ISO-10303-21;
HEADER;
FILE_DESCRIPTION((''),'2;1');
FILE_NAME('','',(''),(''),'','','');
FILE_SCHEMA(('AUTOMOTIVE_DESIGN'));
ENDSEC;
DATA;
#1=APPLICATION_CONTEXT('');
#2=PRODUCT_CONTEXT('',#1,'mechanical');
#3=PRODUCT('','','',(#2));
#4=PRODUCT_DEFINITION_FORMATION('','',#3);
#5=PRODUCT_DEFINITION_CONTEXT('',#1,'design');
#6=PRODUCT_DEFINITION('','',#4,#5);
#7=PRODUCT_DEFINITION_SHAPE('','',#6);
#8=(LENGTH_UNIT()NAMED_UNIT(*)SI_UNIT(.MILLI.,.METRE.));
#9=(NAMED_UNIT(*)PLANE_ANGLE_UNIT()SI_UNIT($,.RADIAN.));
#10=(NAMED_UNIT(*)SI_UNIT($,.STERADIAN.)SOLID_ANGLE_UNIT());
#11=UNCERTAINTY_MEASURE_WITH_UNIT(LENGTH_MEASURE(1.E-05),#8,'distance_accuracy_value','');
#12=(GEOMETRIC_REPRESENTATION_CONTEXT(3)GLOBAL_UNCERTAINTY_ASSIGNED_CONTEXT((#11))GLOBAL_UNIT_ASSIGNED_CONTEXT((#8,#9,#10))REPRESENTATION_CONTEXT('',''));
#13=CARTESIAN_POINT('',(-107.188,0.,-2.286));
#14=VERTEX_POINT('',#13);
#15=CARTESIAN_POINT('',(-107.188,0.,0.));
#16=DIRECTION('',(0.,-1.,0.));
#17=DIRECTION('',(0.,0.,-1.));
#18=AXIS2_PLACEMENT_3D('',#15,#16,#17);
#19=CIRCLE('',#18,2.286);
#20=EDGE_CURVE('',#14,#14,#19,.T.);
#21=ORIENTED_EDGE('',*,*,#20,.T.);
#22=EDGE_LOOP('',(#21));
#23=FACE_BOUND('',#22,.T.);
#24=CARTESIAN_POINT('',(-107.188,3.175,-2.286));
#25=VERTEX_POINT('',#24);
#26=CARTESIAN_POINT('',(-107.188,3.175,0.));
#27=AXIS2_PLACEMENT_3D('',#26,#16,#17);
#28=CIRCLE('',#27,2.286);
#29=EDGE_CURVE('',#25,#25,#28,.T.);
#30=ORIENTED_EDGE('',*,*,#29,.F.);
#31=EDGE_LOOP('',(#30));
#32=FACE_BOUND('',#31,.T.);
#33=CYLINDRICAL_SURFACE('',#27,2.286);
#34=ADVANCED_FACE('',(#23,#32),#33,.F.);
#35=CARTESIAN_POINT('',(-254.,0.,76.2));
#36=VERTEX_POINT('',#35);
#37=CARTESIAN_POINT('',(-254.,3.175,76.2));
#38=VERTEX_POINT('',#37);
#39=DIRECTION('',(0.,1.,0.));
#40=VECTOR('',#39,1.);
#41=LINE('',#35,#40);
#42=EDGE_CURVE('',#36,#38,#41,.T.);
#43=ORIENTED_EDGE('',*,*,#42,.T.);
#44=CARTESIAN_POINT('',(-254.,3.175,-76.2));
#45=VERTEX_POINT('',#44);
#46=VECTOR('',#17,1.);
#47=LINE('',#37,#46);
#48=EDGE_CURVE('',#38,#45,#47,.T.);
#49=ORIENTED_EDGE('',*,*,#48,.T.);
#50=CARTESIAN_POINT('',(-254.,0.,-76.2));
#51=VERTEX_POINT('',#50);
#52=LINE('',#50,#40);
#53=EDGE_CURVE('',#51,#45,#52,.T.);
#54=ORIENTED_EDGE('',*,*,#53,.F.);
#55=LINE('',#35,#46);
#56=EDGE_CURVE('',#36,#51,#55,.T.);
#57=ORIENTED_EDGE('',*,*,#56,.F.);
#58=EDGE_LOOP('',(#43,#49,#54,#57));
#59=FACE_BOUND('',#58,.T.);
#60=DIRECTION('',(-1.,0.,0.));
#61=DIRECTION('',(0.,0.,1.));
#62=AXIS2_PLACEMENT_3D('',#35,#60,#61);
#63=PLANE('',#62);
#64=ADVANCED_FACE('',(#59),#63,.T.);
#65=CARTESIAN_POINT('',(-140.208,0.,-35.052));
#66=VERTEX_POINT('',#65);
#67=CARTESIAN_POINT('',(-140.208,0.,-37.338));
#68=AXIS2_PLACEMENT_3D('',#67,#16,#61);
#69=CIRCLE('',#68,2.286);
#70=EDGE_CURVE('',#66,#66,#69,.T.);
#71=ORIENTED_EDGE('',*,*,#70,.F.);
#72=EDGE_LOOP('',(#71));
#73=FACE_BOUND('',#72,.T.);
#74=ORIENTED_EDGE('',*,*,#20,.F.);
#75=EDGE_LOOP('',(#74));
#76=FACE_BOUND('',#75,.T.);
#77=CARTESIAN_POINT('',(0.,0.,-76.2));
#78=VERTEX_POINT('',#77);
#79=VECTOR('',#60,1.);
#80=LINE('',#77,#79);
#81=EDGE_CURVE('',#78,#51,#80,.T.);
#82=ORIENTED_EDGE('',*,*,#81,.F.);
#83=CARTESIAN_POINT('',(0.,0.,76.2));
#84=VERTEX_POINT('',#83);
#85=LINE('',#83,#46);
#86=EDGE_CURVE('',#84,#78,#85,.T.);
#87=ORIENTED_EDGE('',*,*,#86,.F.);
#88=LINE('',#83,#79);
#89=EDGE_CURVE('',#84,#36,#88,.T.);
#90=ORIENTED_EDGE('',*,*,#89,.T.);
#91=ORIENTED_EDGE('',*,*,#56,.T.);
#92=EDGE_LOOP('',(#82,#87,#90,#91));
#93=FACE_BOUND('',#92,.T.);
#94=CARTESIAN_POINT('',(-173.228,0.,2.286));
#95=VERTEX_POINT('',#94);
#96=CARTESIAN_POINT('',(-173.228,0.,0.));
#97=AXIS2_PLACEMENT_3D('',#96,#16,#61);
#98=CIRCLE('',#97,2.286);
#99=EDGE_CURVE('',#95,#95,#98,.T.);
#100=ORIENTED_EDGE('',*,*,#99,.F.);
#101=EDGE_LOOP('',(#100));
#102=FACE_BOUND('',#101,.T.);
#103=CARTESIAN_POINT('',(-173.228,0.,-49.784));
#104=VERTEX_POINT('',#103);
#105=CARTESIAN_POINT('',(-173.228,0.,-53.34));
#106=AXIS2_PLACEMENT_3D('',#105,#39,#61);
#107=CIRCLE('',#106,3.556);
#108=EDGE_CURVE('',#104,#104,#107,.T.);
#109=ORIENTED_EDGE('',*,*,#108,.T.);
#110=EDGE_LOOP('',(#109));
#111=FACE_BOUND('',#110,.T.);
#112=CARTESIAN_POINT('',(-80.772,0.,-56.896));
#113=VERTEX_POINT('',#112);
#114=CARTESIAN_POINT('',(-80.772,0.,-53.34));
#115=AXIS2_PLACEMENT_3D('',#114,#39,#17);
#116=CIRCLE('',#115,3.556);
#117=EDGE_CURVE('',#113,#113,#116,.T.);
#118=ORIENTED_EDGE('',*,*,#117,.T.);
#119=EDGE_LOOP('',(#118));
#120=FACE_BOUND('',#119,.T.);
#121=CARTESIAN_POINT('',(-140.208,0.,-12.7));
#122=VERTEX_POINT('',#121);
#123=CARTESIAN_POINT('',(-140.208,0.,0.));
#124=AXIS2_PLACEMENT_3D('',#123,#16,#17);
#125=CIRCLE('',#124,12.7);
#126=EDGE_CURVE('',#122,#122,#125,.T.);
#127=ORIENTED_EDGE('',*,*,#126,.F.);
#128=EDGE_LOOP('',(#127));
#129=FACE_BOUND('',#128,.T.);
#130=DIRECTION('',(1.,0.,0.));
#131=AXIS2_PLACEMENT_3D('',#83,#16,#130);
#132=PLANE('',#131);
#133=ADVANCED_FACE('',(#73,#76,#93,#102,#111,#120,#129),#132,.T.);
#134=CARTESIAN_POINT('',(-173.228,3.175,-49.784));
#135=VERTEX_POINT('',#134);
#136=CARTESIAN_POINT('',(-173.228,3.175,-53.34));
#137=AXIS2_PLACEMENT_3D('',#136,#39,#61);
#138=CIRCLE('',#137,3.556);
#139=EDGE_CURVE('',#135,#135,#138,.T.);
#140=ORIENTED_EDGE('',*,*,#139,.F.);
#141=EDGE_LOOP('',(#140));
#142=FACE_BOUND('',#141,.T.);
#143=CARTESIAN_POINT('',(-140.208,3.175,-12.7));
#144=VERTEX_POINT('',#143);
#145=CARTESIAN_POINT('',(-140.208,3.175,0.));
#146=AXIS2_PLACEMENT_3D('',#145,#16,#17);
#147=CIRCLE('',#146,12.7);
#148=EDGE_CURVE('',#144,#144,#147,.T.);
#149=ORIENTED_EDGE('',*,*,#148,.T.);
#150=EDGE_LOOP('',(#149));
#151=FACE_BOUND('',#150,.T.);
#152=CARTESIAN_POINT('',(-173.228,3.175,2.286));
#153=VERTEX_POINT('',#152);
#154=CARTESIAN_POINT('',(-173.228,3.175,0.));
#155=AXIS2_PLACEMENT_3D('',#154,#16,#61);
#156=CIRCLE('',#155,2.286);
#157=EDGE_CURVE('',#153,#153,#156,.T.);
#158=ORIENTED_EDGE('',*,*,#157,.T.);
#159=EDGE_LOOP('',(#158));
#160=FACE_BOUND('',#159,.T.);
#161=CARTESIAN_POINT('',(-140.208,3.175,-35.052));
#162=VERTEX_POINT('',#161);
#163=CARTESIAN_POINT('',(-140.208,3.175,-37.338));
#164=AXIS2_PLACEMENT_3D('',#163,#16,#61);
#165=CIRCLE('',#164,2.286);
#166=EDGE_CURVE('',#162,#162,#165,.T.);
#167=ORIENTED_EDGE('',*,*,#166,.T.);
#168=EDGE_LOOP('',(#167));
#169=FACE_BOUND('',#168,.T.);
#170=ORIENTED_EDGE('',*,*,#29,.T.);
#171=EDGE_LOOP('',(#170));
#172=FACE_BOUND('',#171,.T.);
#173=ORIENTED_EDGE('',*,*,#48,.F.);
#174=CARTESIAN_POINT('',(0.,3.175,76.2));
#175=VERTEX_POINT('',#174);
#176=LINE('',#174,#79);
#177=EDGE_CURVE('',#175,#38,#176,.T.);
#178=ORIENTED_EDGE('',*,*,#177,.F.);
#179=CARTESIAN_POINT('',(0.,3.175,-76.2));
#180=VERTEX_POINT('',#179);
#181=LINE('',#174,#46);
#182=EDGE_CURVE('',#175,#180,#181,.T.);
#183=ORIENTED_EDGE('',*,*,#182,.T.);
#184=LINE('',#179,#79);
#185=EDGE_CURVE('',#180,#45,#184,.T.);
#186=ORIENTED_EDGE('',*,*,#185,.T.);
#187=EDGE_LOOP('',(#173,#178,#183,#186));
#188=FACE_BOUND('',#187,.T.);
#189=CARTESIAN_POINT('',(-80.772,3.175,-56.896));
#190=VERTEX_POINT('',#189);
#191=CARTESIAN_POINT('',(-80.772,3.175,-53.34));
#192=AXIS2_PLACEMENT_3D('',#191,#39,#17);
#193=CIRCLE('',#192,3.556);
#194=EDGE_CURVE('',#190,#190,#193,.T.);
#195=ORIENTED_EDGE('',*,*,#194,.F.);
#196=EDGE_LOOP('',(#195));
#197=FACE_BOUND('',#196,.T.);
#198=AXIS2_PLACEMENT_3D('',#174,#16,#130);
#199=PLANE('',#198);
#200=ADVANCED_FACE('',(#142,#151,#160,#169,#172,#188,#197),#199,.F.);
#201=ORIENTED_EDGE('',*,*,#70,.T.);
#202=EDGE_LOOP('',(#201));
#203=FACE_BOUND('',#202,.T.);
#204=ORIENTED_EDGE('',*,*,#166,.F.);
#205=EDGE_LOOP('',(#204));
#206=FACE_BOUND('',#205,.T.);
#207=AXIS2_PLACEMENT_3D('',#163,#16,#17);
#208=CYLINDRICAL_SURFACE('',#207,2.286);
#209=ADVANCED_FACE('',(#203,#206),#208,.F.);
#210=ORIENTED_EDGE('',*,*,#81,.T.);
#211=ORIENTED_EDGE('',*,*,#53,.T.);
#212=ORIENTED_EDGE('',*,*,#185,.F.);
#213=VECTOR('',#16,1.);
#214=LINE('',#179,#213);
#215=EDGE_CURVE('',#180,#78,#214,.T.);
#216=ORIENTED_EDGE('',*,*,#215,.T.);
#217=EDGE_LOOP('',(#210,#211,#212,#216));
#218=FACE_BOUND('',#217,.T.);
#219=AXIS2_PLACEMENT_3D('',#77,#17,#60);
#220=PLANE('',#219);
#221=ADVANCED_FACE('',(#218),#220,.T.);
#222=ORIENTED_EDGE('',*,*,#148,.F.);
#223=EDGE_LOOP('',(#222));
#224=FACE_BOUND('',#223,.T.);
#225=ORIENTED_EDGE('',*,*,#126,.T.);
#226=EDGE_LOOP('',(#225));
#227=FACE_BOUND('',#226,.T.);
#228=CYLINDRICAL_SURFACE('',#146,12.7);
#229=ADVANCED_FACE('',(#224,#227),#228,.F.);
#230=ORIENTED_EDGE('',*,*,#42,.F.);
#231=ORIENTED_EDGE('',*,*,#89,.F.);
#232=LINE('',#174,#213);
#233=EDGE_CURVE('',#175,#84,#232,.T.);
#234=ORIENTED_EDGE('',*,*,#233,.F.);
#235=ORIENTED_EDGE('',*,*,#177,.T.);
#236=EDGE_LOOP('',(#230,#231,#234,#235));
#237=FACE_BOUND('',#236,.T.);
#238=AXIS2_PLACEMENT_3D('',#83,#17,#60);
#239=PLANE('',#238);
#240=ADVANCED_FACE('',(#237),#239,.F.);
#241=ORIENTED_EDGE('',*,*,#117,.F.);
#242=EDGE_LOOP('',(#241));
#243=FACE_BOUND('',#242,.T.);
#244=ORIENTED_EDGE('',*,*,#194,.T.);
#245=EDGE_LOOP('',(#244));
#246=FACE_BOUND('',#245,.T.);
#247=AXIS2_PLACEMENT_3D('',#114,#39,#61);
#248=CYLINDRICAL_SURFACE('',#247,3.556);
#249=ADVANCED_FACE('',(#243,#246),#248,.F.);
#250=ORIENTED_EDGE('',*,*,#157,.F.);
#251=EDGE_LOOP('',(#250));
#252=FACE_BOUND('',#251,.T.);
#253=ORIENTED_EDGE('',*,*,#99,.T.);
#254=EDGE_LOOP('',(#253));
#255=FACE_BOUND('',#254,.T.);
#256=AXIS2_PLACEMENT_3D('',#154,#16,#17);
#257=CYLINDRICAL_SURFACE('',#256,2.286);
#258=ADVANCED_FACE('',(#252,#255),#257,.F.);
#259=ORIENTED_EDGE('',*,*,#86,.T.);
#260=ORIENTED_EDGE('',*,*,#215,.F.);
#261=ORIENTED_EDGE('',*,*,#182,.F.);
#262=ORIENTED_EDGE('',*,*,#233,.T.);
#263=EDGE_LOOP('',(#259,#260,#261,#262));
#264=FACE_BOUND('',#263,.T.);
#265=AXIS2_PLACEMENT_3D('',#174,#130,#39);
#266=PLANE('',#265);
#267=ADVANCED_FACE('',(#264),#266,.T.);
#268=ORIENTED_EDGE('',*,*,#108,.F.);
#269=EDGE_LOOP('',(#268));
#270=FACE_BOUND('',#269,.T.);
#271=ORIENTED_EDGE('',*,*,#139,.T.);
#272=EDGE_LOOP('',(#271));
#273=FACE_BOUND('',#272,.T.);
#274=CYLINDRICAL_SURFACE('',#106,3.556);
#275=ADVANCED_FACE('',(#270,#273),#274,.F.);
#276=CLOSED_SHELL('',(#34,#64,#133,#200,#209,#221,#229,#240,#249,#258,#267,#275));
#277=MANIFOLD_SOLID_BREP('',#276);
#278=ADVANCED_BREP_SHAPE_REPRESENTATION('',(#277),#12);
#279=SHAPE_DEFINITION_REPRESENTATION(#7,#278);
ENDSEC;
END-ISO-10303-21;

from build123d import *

# Parameters (mm, degrees)
SKETCH1_W          = 254
SKETCH1_H          = 3.175
BASE_FLANGE1_DEPTH = 76.2
SKETCH6_R          = 12.7
CUT_EXTRUDE1_DEPTH = 266.202791511
SKETCH7_R          = 2.286
CUT_EXTRUDE2_DEPTH = 266.202791511
SKETCH8_R          = 2.286
CUT_EXTRUDE3_DEPTH = 266.202791511
SKETCH9_R          = 3.556
CUT_EXTRUDE4_DEPTH = 266.202791511


# Sheet-metal steps are written as plain solids
with BuildPart() as part:
    # Sketch1 → Base-Flange1 (new, symmetric)
    with BuildSketch(Plane.XY):
        with Locations((-127, 1.5875)):
            Rectangle(SKETCH1_W, SKETCH1_H)
    extrude(amount=BASE_FLANGE1_DEPTH, both=True)

    # Sketch6 → Cut-Extrude1 (cut, through all)
    with BuildSketch(Plane.XZ):
        with Locations(Location((-140.208, 0, 0), (0, 0, 270))):
            Circle(SKETCH6_R)
    extrude(amount=-CUT_EXTRUDE1_DEPTH, mode=Mode.SUBTRACT)

    # Sketch7 → Cut-Extrude2 (cut, through all)
    with BuildSketch(Plane.XZ):
        with Locations(Location((-107.188, 0, 0), (0, 0, 270))):
            Circle(SKETCH7_R)
        with Locations(Location((-173.228, 0, 0), (0, 0, 90))):
            Circle(SKETCH7_R)
    extrude(amount=-CUT_EXTRUDE2_DEPTH, mode=Mode.SUBTRACT)

    # Sketch8 → Cut-Extrude3 (cut, through all)
    with BuildSketch(Plane.XZ):
        with Locations(Location((-140.208, -37.338, 0), (0, 0, 90))):
            Circle(SKETCH8_R)
    extrude(amount=-CUT_EXTRUDE3_DEPTH, mode=Mode.SUBTRACT)

    # Sketch9 → Cut-Extrude4 (cut, through all)
    with BuildSketch(Plane(origin=(0, 3.175, 0), x_dir=(1, 0, 0), z_dir=(0, 1, 0))):
        with Locations(Location((-173.228, 53.34, 0), (0, 0, 270))):
            Circle(SKETCH9_R)
        with Locations(Location((-80.772, 53.34, 0), (0, 0, 90))):
            Circle(SKETCH9_R)
    extrude(amount=-CUT_EXTRUDE4_DEPTH, mode=Mode.SUBTRACT)


solid = part.part
